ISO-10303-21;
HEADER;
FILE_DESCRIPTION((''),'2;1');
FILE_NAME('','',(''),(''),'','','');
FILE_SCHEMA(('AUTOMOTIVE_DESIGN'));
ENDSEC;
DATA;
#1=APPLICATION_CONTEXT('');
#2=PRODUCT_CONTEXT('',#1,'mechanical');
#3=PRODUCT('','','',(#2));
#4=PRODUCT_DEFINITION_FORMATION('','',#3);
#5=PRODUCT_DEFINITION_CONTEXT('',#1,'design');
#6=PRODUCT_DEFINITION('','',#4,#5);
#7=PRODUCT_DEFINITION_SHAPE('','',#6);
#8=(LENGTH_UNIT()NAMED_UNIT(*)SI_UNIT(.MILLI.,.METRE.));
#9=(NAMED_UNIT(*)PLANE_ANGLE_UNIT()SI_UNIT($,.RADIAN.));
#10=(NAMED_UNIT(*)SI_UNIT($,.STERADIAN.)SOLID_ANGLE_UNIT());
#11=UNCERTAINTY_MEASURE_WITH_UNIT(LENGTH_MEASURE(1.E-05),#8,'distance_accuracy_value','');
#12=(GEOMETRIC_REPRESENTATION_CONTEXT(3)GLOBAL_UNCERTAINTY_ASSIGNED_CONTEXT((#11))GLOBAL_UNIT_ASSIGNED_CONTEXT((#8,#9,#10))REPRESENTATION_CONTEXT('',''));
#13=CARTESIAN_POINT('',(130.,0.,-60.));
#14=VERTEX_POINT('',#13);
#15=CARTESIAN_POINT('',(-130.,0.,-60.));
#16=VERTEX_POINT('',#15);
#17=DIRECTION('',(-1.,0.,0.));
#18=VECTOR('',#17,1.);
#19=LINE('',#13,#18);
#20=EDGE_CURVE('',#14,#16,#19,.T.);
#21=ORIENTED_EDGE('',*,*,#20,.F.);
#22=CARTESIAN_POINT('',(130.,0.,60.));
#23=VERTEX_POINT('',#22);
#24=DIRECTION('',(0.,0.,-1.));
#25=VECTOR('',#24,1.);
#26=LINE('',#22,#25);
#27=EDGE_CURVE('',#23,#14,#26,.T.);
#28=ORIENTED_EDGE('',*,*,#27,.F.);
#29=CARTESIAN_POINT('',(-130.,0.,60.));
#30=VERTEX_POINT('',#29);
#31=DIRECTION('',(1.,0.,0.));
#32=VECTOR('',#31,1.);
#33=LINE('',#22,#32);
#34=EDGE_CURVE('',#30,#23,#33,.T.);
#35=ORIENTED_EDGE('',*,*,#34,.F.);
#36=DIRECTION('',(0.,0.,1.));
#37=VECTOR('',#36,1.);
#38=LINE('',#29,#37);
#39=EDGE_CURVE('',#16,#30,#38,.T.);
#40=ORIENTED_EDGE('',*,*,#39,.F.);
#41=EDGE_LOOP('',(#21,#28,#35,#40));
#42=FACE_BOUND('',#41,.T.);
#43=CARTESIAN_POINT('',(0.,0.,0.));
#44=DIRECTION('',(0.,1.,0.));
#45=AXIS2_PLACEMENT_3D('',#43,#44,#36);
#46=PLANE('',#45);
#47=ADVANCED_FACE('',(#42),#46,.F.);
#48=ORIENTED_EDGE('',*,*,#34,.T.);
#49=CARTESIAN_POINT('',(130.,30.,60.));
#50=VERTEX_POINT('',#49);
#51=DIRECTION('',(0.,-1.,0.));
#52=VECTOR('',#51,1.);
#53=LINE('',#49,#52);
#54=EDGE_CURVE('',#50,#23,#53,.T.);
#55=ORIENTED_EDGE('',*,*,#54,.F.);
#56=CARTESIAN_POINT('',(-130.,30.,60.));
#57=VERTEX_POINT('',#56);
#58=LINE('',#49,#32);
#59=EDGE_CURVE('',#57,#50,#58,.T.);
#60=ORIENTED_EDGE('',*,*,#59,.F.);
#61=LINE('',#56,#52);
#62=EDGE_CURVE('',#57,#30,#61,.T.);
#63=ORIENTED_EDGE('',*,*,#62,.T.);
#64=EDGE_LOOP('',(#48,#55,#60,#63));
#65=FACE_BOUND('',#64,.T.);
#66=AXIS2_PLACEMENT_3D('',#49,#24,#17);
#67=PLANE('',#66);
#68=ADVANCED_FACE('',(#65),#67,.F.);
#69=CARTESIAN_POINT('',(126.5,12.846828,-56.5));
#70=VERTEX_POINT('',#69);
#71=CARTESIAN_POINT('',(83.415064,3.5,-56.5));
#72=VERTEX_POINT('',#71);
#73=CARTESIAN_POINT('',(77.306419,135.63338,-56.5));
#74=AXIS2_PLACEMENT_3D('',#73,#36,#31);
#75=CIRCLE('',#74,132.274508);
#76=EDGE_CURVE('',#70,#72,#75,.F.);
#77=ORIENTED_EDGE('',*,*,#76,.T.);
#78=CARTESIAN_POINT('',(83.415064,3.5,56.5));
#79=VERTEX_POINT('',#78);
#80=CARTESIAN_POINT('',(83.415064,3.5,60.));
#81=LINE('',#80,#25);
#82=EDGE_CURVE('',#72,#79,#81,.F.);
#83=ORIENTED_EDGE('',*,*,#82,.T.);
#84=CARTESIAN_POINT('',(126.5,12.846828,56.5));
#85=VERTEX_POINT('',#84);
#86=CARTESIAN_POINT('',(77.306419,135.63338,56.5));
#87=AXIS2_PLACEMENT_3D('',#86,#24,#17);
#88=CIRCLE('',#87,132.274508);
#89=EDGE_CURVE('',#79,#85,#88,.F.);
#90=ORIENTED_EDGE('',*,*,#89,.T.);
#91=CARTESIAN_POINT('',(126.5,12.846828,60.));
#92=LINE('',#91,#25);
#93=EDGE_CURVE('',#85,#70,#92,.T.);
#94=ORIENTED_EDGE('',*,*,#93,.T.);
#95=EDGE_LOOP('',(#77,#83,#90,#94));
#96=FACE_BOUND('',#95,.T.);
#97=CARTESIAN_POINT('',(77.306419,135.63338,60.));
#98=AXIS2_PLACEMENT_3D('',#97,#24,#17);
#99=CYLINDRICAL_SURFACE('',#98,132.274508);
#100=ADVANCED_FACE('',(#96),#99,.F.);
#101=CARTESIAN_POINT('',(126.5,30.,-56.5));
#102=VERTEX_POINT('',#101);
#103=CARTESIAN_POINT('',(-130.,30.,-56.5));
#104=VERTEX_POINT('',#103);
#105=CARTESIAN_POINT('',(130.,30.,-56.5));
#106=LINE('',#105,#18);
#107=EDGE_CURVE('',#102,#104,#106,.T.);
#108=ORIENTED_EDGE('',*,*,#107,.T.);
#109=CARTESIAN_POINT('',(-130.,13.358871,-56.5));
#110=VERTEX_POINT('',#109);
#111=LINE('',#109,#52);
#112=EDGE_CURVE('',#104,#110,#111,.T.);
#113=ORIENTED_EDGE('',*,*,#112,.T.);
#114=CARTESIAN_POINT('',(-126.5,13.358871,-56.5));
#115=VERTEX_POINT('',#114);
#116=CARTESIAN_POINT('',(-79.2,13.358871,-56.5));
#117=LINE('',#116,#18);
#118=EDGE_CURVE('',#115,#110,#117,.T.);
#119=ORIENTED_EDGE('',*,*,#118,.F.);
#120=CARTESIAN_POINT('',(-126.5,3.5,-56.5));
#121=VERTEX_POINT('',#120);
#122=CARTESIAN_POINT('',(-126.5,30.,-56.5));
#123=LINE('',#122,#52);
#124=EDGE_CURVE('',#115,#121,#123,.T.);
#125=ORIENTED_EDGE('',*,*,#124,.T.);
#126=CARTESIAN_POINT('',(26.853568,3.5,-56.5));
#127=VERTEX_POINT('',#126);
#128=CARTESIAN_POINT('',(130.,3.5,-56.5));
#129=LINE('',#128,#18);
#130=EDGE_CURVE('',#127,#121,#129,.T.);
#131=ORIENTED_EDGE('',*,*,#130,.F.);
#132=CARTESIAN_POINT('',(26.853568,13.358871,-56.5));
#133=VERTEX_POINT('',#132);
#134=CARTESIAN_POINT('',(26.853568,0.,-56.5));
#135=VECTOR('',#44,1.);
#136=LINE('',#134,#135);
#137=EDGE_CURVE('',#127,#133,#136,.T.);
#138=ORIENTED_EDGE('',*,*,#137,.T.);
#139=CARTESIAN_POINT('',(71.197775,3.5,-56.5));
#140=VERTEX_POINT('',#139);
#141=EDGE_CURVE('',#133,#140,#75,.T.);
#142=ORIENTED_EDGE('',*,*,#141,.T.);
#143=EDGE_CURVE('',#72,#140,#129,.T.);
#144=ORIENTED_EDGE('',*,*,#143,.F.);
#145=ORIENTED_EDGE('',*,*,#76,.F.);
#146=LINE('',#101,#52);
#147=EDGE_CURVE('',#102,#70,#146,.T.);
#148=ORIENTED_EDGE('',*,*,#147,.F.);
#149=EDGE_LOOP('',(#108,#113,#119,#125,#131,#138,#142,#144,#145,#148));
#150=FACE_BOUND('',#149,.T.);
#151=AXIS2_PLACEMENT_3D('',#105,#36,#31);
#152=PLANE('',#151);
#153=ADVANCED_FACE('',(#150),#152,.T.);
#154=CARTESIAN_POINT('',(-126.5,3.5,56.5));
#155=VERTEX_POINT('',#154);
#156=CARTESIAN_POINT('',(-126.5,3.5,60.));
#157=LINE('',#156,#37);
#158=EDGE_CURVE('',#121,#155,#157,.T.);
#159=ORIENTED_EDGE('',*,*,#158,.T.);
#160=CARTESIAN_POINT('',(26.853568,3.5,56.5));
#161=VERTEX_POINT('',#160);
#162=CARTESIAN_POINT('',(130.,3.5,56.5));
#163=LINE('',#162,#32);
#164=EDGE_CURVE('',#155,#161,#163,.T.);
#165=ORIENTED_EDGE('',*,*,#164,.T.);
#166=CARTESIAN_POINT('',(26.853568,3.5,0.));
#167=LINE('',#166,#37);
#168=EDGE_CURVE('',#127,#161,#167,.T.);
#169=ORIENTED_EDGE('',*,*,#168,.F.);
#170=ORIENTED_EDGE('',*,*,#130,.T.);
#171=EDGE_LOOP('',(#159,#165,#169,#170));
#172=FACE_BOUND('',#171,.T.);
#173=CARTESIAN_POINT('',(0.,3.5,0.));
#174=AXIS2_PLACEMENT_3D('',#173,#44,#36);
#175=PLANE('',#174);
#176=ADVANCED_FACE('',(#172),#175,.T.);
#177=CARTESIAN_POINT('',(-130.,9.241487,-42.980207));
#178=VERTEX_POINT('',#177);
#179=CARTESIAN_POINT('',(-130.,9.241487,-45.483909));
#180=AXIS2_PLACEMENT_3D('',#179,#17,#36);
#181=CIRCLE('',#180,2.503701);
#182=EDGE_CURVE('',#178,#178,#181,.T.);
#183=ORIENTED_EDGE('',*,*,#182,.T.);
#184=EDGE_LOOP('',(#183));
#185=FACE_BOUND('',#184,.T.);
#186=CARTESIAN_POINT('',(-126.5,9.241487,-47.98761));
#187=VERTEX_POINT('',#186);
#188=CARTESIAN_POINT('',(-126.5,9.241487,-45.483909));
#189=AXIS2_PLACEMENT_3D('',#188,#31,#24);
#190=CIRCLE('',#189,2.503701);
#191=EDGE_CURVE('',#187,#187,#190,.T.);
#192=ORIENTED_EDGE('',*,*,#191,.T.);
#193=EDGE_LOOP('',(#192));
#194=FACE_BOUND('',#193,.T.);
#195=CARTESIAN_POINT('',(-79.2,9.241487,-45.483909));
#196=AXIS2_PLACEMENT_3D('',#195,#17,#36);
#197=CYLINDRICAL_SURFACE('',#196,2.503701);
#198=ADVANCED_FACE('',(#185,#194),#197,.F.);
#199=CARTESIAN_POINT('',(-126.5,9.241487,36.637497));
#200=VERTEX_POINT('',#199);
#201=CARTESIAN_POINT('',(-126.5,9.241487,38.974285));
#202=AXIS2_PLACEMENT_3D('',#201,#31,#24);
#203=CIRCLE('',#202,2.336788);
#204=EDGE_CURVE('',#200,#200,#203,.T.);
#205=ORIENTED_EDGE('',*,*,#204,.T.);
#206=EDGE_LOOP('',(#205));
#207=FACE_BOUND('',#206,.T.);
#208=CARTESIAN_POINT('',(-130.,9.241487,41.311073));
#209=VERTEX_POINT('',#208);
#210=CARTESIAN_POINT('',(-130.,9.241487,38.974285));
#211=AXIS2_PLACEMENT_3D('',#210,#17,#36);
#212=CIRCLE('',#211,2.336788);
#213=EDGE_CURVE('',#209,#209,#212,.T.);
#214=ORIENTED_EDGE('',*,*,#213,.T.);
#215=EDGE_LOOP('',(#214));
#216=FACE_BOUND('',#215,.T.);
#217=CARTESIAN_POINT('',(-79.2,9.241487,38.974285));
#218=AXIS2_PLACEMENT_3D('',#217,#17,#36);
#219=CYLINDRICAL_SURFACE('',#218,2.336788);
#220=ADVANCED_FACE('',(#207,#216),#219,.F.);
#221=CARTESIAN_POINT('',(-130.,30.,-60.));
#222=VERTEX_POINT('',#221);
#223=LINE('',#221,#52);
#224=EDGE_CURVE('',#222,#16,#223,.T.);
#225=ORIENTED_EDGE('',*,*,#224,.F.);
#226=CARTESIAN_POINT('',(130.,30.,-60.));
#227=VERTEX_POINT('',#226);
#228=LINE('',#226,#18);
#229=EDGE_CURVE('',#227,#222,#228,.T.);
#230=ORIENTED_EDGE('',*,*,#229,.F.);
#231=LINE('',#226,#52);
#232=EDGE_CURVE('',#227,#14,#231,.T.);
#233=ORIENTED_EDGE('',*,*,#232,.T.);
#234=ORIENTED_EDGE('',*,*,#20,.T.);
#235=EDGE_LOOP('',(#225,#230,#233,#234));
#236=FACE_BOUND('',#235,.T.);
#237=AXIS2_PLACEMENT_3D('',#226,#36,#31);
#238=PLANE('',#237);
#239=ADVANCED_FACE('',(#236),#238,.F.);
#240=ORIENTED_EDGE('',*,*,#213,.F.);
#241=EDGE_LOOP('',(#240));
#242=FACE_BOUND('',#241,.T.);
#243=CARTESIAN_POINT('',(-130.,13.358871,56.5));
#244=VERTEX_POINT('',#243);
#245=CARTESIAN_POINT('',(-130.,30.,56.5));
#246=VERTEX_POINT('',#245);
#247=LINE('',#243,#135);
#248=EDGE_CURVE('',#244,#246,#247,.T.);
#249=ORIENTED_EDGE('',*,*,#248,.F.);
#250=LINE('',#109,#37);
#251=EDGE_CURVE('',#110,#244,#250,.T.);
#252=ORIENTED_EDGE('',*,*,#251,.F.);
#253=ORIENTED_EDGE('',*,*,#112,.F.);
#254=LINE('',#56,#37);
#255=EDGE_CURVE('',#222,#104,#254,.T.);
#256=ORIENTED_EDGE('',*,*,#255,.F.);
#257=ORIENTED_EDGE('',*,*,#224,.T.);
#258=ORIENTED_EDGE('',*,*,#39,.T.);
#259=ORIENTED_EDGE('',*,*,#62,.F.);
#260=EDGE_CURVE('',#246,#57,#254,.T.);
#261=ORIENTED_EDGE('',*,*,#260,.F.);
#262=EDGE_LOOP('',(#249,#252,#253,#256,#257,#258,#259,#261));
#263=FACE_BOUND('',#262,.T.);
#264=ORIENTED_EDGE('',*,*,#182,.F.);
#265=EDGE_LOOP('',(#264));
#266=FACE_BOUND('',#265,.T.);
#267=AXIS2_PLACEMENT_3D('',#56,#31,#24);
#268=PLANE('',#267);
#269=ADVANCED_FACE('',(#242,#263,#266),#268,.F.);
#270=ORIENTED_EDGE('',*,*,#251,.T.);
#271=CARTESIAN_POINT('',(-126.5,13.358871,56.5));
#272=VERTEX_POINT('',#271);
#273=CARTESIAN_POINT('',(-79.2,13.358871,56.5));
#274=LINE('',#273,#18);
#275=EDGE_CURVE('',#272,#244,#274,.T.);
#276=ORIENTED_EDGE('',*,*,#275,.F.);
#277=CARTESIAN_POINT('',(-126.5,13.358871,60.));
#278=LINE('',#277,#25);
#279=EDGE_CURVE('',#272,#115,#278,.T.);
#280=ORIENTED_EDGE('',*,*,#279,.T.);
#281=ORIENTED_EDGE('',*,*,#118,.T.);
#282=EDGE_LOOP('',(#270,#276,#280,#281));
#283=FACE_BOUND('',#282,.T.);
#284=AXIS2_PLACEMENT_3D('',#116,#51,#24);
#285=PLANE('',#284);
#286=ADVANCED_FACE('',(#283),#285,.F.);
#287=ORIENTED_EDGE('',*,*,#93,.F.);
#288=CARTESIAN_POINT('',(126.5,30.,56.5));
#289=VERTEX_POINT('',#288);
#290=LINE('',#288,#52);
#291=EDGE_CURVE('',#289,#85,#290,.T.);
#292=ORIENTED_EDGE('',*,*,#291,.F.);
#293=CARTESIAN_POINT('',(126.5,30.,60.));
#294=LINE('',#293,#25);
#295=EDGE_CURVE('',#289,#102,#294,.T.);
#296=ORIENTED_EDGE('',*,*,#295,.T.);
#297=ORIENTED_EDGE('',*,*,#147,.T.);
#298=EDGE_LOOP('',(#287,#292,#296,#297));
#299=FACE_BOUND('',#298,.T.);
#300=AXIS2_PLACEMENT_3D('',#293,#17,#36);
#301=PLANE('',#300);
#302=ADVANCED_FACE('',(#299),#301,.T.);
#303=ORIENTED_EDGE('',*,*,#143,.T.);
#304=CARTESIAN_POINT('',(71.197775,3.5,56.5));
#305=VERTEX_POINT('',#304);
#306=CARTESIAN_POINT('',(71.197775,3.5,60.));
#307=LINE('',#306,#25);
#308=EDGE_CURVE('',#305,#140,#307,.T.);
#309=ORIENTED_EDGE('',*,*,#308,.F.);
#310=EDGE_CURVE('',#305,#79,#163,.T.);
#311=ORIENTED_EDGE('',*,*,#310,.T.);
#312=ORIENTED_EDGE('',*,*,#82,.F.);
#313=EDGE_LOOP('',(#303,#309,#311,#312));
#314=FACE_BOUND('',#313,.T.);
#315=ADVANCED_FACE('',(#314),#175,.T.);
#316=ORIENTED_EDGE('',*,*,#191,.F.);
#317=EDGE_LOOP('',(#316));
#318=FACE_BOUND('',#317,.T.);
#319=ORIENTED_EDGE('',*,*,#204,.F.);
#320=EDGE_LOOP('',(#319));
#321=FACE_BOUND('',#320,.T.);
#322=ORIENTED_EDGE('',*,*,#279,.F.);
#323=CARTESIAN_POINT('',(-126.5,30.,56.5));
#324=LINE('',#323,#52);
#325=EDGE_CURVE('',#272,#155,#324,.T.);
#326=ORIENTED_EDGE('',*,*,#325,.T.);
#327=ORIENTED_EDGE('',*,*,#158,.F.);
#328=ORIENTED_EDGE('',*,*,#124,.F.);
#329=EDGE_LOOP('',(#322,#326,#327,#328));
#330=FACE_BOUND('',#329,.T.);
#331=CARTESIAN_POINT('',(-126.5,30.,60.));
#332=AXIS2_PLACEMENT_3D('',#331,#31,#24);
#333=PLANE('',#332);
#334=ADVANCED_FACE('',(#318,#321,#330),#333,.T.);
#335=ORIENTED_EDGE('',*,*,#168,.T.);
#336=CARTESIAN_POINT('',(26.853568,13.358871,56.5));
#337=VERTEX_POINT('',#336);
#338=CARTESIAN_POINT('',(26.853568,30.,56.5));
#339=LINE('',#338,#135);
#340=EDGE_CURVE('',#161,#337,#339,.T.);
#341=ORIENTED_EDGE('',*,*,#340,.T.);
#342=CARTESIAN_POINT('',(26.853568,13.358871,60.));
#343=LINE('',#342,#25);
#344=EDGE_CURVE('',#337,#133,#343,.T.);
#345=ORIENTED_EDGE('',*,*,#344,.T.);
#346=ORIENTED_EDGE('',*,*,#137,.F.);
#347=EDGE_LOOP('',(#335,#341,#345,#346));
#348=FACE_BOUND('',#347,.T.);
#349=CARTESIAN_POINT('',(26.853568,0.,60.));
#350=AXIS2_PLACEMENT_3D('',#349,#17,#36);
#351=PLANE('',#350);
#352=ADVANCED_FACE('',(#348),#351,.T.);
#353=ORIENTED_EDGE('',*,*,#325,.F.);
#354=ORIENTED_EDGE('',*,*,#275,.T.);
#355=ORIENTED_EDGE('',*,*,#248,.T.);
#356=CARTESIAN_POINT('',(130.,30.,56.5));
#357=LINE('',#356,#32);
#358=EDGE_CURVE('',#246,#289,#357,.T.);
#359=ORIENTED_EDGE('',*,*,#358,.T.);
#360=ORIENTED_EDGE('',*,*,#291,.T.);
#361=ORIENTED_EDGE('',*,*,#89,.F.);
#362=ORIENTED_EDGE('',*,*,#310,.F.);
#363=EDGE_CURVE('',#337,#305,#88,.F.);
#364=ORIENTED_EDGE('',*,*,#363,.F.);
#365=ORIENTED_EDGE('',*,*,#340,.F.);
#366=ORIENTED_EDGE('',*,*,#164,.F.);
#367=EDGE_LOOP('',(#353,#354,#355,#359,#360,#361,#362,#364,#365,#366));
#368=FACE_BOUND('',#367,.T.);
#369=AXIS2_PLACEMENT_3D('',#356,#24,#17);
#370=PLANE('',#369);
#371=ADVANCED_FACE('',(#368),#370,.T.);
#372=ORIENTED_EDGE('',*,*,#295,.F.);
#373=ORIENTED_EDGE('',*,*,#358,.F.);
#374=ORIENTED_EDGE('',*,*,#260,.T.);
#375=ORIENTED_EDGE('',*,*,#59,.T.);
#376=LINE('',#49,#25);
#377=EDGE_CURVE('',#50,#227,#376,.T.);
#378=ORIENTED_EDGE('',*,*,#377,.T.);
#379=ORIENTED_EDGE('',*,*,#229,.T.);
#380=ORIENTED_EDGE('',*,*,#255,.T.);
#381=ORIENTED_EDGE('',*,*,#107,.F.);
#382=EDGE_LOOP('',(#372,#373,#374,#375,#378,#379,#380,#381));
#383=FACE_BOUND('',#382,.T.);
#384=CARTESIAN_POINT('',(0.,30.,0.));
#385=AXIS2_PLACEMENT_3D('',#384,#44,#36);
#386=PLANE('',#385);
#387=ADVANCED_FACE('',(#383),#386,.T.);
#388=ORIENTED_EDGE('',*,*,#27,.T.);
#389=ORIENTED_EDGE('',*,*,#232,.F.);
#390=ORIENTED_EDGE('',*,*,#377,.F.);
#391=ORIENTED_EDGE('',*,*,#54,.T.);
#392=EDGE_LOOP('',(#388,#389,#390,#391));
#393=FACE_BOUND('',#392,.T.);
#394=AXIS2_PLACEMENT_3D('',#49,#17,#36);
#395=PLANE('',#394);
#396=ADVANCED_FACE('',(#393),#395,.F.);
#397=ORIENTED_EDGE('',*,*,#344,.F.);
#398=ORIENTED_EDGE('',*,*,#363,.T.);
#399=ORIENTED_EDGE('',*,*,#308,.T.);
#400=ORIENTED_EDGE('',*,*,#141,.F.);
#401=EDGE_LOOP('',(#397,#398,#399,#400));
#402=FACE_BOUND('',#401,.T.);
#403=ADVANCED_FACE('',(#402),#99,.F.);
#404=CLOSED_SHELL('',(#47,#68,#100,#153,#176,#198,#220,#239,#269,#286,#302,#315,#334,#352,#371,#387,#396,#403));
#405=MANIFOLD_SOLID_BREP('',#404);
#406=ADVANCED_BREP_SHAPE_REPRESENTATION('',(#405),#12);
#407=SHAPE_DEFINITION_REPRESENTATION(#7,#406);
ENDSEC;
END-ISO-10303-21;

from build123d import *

# Parameters (mm, degrees)
CROQUIS1_W              = 260
CROQUIS1_H              = 120
SALIENTE_EXTRUIR1_DEPTH = 30
VACIADO1_T              = -3.5
SALIENTE_EXTRUIR2_REACH = 179.122
CROQUIS3_W              = 113
CROQUIS3_H              = 24.257897879
CORTAR_EXTRUIR1_DEPTH   = 50.8
CROQUIS4_R              = 2.503701387
CROQUIS4_R_2            = 2.336787961
CORTAR_EXTRUIR2_DEPTH   = 50.8


with BuildPart() as part:
    # Croquis1 → Saliente-Extruir1 (new body)
    with BuildSketch(Plane(origin=(0, 0, 0), x_dir=(1, 0, 0), z_dir=(0, 1, 0))):
        Rectangle(CROQUIS1_W, CROQUIS1_H)
    extrude(amount=SALIENTE_EXTRUIR1_DEPTH)

    # Vaciado1
    vaciado1_openings = [part.faces().sort_by_distance(p)[0] for p in [
        (0, 30, 0),
    ]]
    offset(amount=VACIADO1_T, openings=vaciado1_openings, kind=Kind.INTERSECTION)

    # Croquis2 → Saliente-Extruir2 (add, up to next)
    with BuildSketch(Plane.XY.offset(-56.5), mode=Mode.PRIVATE) as saliente_extruir2_sk1:
        with BuildLine():
            Line((26.853568464, 3.358871314), (77.306419391, 3.358871314))
            ThreePointArc((77.306419391, 3.358871314), (51.589255051, 5.882953779), (26.853568464, 13.358871314))
            Line((26.853568464, 13.358871314), (26.853568464, 3.358871314))
        make_face()
    saliente_extruir2_tool1 = extrude(saliente_extruir2_sk1.sketch, amount=SALIENTE_EXTRUIR2_REACH, mode=Mode.PRIVATE) - part.part
    # Croquis2 → Saliente-Extruir2 (add, up to next)
    with BuildSketch(Plane.XY.offset(-56.5), mode=Mode.PRIVATE) as saliente_extruir2_sk2:
        with BuildLine():
            ThreePointArc((126.5, 12.846828341), (105.349686421, 6.365747469), (83.415063898, 3.5))
            Line((83.415063898, 3.5), (126.5, 3.5))
            Line((126.5, 3.5), (126.5, 12.846828341))
        make_face()
    saliente_extruir2_tool2 = extrude(saliente_extruir2_sk2.sketch, amount=SALIENTE_EXTRUIR2_REACH, mode=Mode.PRIVATE) - part.part
    add(saliente_extruir2_tool1.solids().sort_by_distance((39.369452, 6.338377, -56.5))[0])
    add(saliente_extruir2_tool2.solids().sort_by_distance((114.741247, 6.306435, -56.5))[0])

    # Croquis3 → Cortar-Extruir1 (cut)
    with BuildSketch(Plane.ZY.offset(130)):
        with Locations((0, 25.487820254)):
            Rectangle(CROQUIS3_W, CROQUIS3_H)
    extrude(amount=-CORTAR_EXTRUIR1_DEPTH, mode=Mode.SUBTRACT)

    # Croquis4 → Cortar-Extruir2 (cut)
    with BuildSketch(Plane.ZY.offset(130)):
        with Locations((-45.483908525, 9.241486811)):
            Circle(CROQUIS4_R)
        with Locations((38.97428492, 9.241486811)):
            Circle(CROQUIS4_R_2)
    extrude(amount=-CORTAR_EXTRUIR2_DEPTH, mode=Mode.SUBTRACT)


solid = part.part
